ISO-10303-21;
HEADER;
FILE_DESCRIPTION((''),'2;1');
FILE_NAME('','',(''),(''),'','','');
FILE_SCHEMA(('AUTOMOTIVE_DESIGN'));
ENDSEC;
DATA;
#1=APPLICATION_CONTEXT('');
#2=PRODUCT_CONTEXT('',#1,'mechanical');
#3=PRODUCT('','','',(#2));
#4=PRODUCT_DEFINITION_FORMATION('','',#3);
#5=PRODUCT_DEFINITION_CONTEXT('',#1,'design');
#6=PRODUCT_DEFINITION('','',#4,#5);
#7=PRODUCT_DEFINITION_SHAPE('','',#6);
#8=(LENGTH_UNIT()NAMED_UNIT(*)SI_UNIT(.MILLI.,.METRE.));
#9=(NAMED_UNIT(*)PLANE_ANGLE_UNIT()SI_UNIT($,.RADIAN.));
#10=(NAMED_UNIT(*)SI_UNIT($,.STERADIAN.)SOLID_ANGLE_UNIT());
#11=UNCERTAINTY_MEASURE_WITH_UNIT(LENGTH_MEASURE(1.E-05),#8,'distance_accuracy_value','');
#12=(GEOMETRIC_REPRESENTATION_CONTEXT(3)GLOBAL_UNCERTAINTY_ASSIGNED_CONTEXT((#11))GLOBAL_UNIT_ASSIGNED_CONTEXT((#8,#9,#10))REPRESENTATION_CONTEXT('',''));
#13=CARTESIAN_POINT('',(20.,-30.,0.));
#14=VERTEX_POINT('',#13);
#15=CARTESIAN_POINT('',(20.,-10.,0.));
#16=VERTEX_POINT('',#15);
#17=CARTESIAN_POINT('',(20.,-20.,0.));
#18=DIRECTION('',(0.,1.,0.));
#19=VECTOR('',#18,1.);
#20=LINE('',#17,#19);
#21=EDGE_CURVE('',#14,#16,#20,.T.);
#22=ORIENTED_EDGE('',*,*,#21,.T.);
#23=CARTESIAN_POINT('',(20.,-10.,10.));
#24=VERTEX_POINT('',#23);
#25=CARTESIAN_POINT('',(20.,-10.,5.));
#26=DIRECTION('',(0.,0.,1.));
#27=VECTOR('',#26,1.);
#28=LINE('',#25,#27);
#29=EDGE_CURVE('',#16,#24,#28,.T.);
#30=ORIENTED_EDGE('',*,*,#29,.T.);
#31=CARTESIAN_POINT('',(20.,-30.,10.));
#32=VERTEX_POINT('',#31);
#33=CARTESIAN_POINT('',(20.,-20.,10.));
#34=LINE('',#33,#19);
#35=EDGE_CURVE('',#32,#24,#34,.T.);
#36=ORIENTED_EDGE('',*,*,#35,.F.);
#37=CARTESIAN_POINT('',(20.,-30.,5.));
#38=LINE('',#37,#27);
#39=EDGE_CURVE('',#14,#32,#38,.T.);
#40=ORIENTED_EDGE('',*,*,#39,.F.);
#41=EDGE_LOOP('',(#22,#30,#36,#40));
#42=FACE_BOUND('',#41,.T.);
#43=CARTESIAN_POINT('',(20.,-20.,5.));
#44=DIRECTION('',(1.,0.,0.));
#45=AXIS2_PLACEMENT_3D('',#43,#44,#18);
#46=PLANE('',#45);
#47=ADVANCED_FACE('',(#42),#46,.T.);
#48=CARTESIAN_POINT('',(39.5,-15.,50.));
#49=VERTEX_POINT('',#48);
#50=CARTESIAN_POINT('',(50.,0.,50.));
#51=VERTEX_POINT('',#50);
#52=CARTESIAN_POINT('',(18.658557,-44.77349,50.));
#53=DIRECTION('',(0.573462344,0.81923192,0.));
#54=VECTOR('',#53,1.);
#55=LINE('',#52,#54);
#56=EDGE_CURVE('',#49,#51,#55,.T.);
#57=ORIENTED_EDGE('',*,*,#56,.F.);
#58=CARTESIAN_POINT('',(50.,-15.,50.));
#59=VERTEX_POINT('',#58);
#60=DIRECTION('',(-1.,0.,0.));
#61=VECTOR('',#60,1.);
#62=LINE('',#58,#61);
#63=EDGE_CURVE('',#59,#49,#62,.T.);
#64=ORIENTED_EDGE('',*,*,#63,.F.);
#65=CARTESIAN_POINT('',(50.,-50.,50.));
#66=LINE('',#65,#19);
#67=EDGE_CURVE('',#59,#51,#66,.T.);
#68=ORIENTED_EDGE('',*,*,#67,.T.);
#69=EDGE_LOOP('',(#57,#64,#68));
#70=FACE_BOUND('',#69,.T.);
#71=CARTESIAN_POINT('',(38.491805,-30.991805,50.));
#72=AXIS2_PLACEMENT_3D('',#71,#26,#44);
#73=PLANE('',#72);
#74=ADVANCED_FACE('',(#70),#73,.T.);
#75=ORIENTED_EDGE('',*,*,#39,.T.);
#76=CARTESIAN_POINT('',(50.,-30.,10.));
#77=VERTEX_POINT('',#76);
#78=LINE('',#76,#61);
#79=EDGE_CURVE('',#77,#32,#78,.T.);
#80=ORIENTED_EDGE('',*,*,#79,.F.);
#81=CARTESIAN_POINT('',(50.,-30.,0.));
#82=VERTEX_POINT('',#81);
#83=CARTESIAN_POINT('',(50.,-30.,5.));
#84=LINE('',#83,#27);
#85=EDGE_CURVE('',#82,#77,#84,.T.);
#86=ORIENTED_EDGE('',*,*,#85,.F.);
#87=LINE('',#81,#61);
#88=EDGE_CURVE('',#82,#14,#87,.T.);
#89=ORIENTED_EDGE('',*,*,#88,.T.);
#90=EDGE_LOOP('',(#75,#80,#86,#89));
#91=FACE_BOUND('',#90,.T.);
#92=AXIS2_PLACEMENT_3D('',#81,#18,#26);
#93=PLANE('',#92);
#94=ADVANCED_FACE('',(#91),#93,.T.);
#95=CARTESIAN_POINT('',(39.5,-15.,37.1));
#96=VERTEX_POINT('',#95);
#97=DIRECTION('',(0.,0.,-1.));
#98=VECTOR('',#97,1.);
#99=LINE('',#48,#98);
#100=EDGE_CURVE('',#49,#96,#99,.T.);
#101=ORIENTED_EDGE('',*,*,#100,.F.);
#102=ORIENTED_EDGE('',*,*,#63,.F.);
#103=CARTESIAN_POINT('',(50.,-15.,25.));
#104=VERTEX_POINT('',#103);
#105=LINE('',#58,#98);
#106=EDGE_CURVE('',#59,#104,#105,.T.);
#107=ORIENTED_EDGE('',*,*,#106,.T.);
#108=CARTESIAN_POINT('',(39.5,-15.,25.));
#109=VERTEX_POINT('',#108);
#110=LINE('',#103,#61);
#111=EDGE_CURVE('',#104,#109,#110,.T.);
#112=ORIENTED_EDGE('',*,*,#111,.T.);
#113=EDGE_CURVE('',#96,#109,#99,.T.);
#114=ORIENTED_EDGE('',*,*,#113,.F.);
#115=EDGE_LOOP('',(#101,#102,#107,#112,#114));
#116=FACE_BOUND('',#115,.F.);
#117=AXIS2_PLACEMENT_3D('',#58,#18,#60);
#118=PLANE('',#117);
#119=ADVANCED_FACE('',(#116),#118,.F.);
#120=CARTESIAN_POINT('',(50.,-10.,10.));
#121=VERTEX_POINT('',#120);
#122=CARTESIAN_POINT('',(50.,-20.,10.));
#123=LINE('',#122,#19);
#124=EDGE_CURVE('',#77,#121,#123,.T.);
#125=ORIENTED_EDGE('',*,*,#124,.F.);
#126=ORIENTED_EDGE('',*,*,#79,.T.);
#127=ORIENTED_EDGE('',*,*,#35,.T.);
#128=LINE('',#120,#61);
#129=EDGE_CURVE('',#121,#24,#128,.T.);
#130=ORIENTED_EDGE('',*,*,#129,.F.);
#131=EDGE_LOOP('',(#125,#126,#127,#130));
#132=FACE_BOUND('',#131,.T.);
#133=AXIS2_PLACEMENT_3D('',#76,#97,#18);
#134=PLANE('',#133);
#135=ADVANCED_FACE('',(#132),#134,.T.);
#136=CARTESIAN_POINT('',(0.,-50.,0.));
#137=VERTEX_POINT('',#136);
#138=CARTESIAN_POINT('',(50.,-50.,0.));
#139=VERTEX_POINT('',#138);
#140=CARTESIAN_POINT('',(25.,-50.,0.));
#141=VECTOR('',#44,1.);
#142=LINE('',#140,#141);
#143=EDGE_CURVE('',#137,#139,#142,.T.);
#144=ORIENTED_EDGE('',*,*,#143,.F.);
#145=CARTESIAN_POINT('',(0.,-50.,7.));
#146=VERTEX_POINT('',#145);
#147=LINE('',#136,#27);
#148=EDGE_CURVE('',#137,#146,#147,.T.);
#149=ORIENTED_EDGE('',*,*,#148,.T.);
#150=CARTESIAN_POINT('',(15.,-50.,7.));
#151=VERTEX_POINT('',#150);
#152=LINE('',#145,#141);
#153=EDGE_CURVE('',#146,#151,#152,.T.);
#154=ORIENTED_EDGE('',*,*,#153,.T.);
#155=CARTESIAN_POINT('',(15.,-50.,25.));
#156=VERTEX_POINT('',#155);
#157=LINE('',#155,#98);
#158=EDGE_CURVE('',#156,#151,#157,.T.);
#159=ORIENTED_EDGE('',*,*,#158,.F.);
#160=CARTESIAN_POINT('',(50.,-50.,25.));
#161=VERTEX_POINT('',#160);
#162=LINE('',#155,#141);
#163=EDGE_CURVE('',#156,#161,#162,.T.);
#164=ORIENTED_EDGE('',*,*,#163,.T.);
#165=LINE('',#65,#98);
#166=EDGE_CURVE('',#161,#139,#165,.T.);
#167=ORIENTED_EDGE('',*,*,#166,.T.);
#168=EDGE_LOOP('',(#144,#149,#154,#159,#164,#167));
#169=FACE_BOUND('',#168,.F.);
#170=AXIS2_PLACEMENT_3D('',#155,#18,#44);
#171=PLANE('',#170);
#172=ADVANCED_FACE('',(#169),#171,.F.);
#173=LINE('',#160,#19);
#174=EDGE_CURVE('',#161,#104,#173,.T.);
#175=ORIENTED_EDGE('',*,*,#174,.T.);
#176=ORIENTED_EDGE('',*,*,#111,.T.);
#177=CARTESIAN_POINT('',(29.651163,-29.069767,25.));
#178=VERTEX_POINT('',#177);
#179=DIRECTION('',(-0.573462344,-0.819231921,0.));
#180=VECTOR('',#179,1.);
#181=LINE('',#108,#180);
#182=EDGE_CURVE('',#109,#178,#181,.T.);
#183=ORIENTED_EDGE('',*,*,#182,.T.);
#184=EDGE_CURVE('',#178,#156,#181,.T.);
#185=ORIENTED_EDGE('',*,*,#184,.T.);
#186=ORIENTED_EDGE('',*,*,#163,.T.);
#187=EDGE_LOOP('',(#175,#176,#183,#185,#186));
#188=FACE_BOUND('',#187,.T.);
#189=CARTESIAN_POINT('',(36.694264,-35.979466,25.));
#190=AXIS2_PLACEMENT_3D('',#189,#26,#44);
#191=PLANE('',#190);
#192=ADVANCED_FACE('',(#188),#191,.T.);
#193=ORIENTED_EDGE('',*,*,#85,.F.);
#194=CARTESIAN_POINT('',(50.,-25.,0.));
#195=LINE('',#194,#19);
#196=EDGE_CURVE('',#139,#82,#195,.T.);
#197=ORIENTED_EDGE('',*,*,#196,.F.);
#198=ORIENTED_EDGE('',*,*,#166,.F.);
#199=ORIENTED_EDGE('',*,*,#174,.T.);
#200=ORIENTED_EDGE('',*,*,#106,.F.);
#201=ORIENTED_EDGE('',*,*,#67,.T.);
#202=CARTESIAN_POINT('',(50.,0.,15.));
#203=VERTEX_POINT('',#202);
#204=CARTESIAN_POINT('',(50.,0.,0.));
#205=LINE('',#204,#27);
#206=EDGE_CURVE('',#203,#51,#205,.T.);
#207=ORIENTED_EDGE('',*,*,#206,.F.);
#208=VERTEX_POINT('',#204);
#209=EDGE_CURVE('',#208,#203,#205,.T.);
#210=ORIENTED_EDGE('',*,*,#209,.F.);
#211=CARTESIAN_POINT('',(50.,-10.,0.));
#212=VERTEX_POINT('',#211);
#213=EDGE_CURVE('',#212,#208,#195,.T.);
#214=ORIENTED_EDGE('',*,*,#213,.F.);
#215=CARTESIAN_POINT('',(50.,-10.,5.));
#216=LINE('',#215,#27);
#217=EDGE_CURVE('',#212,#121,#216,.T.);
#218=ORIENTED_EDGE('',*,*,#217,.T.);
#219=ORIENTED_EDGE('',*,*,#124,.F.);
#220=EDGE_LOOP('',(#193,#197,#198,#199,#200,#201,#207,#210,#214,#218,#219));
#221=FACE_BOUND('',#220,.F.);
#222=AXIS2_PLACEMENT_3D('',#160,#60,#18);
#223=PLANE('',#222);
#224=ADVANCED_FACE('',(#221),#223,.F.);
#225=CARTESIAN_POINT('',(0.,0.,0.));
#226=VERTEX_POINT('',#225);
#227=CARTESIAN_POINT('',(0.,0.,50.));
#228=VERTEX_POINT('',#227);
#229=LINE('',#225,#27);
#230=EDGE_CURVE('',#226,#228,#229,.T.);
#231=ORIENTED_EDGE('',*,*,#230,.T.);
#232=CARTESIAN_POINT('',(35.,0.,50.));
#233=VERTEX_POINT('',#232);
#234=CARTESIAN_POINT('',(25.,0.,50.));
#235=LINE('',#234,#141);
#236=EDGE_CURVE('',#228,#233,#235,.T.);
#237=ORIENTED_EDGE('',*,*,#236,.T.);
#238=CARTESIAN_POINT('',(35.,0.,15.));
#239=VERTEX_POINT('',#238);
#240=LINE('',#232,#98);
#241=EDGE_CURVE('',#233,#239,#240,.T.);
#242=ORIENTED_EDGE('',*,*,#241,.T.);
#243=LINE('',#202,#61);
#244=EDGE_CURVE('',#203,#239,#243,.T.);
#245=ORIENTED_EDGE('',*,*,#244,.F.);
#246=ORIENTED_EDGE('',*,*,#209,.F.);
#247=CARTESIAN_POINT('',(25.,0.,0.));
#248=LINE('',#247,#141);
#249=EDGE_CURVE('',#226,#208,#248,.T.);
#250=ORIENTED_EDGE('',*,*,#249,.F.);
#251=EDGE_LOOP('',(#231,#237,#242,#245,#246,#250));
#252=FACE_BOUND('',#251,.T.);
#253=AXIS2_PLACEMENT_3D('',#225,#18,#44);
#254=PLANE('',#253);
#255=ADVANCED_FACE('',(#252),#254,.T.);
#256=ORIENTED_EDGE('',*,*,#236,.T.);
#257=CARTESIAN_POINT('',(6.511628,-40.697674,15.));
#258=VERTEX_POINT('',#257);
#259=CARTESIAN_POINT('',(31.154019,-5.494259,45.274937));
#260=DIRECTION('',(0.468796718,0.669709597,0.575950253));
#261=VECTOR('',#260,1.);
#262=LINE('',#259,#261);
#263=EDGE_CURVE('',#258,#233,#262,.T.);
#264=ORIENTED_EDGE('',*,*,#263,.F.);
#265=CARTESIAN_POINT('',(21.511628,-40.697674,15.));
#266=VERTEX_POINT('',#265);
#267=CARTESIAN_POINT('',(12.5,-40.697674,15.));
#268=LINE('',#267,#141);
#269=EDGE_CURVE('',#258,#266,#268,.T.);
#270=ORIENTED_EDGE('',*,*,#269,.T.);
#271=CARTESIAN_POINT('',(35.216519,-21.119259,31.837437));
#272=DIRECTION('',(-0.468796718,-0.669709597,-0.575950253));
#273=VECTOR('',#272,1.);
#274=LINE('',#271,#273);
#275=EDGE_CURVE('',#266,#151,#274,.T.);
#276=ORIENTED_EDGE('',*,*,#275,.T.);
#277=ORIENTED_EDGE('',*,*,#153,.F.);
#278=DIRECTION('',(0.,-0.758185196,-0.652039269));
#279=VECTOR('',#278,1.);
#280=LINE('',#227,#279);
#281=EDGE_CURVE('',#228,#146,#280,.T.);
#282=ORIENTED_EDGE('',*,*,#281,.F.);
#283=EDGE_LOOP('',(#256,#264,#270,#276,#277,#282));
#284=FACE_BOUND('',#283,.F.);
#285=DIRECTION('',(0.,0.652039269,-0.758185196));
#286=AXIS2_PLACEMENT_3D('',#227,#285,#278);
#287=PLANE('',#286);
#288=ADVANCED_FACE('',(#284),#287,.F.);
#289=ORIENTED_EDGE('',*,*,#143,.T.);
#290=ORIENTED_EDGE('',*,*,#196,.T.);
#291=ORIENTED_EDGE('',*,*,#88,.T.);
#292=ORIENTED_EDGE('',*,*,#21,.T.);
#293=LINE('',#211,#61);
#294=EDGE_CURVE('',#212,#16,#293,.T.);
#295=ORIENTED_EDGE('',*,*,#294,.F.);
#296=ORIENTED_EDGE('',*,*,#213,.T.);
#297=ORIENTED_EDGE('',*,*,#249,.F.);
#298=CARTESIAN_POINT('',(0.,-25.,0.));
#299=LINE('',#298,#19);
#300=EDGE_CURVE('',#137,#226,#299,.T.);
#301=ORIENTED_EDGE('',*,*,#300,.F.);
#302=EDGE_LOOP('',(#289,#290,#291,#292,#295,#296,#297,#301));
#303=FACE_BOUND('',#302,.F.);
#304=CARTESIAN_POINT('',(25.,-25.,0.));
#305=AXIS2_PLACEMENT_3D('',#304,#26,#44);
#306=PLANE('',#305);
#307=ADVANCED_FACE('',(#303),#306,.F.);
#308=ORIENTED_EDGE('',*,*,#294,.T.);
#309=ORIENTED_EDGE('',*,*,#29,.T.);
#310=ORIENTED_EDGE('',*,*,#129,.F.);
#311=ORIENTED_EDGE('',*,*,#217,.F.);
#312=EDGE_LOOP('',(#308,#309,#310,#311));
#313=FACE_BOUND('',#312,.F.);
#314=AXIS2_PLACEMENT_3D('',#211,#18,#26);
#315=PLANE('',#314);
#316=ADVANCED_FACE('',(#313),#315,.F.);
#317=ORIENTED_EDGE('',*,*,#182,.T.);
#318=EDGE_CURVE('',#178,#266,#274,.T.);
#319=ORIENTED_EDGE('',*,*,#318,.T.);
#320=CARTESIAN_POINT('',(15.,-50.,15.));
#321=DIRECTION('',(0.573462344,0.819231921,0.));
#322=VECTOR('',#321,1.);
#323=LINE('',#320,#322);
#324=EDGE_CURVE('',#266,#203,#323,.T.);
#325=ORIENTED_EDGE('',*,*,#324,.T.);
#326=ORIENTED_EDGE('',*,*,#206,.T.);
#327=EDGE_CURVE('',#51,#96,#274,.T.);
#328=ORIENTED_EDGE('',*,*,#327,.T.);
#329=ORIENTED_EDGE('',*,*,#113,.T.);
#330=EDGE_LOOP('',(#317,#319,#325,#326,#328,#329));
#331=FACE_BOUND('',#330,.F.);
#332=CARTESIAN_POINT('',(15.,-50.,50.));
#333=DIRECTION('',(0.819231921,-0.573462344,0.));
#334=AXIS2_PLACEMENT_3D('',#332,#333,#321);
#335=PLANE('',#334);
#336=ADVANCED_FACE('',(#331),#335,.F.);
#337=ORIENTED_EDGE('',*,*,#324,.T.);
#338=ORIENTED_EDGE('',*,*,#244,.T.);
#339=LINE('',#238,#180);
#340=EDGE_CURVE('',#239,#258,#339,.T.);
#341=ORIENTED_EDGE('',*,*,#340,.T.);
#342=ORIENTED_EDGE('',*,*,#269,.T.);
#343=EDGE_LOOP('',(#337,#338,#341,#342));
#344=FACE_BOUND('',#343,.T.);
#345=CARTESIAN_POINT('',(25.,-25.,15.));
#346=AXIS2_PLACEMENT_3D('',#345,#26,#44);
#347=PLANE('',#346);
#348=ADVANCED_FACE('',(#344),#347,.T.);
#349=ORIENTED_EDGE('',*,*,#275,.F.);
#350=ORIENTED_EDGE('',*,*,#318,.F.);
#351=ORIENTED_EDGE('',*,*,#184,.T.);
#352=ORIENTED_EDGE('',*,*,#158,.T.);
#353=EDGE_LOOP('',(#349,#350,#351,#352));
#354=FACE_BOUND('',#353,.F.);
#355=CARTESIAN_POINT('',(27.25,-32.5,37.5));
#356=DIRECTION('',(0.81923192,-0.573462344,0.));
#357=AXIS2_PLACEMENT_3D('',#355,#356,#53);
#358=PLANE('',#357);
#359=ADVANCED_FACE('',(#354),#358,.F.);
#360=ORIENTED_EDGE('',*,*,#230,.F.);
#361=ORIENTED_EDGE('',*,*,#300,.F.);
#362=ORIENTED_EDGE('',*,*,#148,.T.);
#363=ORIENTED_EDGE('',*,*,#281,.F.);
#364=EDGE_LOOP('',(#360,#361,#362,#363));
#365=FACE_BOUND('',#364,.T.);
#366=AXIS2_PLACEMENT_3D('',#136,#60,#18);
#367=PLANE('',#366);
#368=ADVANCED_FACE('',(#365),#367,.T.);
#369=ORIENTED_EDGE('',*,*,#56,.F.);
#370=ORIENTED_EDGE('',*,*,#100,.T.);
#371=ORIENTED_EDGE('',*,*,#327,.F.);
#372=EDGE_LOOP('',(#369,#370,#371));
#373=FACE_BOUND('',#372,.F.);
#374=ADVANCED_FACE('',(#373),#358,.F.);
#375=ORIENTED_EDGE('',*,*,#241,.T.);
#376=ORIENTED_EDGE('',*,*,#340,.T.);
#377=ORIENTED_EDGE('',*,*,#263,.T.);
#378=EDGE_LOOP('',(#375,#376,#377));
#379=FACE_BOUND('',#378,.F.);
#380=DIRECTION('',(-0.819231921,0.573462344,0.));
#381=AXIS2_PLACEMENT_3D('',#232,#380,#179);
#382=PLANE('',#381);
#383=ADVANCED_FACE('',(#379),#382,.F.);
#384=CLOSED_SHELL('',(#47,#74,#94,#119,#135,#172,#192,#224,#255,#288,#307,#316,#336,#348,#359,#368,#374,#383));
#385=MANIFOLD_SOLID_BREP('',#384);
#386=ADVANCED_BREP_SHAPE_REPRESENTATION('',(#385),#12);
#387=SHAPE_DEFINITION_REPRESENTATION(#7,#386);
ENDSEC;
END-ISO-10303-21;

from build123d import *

# Parameters (mm, degrees)
F0_W      = 50
F0_H      = 50
F1_DEPTH  = 50
F3_DEPTH  = 25
F6_DEPTH  = 25
F8_DEPTH  = 25
F9_W      = 20
F9_H      = 10
F11_DEPTH = 30
F13_REACH = 115.9479483752
F14_DEPTH = 35


with BuildPart() as f1:
    # F0 (on Top) → F1 (new body)
    with BuildSketch(Plane.XY):
        with Locations((25, -25)):
            Rectangle(F0_W, F0_H)
    extrude(amount=F1_DEPTH)

    # F2 (on face) → F3 (cut)
    with BuildSketch(Plane.XY.offset(50)):
        Polygon((50, -50), (50, 0), (15, -50), align=None)
    extrude(amount=-F3_DEPTH, mode=Mode.SUBTRACT)

    # F6 (add): a face of the model
    f6_faces = [f1.faces().sort_by_distance(p)[0] for p in [
        (38.3333333333, -33.3333333333, 25),
    ]]
    extrude(f6_faces, amount=F6_DEPTH)

    # F7 (on face) → F8 (cut)
    with BuildSketch(Plane.XY.offset(50)):
        Polygon((15, -50), (50, -50), (50, -15), (39.5, -15), align=None)
    extrude(amount=-F8_DEPTH, mode=Mode.SUBTRACT)

    # F9 (on face) → F11 (cut, through all)
    with BuildSketch(Plane.YZ.offset(50)):
        with Locations((-20, 5)):
            Rectangle(F9_W, F9_H)
    extrude(amount=-F11_DEPTH, mode=Mode.SUBTRACT)

    f13_end = Plane(origin=(27.25, -32.5, 37.5), x_dir=(0.5734623444, 0.8192319205, 0), z_dir=(0.8192319205, -0.5734623444, 0))
    # F12 (on face) → F13 (cut, up to a plane its end follows)
    with BuildSketch(Plane(origin=(0, 0, 0), x_dir=(0, -1, 0), z_dir=(-1, 0, 0))):
        Polygon((50, 50), (0, 50), (50, 7), align=None)
    f13_long = extrude(amount=-F13_REACH, mode=Mode.PRIVATE)
    add(split(f13_long, bisect_by=f13_end, keep=Keep.BOTTOM, mode=Mode.PRIVATE), mode=Mode.SUBTRACT)

    # F4 (on face) → F14 (cut, through all)
    with BuildSketch(Plane.XY.offset(50)):
        Polygon((15, -50), (50, 0), (35, 0), (0, -50), align=None)
    extrude(amount=-F14_DEPTH, mode=Mode.SUBTRACT)


solid = f1.part
